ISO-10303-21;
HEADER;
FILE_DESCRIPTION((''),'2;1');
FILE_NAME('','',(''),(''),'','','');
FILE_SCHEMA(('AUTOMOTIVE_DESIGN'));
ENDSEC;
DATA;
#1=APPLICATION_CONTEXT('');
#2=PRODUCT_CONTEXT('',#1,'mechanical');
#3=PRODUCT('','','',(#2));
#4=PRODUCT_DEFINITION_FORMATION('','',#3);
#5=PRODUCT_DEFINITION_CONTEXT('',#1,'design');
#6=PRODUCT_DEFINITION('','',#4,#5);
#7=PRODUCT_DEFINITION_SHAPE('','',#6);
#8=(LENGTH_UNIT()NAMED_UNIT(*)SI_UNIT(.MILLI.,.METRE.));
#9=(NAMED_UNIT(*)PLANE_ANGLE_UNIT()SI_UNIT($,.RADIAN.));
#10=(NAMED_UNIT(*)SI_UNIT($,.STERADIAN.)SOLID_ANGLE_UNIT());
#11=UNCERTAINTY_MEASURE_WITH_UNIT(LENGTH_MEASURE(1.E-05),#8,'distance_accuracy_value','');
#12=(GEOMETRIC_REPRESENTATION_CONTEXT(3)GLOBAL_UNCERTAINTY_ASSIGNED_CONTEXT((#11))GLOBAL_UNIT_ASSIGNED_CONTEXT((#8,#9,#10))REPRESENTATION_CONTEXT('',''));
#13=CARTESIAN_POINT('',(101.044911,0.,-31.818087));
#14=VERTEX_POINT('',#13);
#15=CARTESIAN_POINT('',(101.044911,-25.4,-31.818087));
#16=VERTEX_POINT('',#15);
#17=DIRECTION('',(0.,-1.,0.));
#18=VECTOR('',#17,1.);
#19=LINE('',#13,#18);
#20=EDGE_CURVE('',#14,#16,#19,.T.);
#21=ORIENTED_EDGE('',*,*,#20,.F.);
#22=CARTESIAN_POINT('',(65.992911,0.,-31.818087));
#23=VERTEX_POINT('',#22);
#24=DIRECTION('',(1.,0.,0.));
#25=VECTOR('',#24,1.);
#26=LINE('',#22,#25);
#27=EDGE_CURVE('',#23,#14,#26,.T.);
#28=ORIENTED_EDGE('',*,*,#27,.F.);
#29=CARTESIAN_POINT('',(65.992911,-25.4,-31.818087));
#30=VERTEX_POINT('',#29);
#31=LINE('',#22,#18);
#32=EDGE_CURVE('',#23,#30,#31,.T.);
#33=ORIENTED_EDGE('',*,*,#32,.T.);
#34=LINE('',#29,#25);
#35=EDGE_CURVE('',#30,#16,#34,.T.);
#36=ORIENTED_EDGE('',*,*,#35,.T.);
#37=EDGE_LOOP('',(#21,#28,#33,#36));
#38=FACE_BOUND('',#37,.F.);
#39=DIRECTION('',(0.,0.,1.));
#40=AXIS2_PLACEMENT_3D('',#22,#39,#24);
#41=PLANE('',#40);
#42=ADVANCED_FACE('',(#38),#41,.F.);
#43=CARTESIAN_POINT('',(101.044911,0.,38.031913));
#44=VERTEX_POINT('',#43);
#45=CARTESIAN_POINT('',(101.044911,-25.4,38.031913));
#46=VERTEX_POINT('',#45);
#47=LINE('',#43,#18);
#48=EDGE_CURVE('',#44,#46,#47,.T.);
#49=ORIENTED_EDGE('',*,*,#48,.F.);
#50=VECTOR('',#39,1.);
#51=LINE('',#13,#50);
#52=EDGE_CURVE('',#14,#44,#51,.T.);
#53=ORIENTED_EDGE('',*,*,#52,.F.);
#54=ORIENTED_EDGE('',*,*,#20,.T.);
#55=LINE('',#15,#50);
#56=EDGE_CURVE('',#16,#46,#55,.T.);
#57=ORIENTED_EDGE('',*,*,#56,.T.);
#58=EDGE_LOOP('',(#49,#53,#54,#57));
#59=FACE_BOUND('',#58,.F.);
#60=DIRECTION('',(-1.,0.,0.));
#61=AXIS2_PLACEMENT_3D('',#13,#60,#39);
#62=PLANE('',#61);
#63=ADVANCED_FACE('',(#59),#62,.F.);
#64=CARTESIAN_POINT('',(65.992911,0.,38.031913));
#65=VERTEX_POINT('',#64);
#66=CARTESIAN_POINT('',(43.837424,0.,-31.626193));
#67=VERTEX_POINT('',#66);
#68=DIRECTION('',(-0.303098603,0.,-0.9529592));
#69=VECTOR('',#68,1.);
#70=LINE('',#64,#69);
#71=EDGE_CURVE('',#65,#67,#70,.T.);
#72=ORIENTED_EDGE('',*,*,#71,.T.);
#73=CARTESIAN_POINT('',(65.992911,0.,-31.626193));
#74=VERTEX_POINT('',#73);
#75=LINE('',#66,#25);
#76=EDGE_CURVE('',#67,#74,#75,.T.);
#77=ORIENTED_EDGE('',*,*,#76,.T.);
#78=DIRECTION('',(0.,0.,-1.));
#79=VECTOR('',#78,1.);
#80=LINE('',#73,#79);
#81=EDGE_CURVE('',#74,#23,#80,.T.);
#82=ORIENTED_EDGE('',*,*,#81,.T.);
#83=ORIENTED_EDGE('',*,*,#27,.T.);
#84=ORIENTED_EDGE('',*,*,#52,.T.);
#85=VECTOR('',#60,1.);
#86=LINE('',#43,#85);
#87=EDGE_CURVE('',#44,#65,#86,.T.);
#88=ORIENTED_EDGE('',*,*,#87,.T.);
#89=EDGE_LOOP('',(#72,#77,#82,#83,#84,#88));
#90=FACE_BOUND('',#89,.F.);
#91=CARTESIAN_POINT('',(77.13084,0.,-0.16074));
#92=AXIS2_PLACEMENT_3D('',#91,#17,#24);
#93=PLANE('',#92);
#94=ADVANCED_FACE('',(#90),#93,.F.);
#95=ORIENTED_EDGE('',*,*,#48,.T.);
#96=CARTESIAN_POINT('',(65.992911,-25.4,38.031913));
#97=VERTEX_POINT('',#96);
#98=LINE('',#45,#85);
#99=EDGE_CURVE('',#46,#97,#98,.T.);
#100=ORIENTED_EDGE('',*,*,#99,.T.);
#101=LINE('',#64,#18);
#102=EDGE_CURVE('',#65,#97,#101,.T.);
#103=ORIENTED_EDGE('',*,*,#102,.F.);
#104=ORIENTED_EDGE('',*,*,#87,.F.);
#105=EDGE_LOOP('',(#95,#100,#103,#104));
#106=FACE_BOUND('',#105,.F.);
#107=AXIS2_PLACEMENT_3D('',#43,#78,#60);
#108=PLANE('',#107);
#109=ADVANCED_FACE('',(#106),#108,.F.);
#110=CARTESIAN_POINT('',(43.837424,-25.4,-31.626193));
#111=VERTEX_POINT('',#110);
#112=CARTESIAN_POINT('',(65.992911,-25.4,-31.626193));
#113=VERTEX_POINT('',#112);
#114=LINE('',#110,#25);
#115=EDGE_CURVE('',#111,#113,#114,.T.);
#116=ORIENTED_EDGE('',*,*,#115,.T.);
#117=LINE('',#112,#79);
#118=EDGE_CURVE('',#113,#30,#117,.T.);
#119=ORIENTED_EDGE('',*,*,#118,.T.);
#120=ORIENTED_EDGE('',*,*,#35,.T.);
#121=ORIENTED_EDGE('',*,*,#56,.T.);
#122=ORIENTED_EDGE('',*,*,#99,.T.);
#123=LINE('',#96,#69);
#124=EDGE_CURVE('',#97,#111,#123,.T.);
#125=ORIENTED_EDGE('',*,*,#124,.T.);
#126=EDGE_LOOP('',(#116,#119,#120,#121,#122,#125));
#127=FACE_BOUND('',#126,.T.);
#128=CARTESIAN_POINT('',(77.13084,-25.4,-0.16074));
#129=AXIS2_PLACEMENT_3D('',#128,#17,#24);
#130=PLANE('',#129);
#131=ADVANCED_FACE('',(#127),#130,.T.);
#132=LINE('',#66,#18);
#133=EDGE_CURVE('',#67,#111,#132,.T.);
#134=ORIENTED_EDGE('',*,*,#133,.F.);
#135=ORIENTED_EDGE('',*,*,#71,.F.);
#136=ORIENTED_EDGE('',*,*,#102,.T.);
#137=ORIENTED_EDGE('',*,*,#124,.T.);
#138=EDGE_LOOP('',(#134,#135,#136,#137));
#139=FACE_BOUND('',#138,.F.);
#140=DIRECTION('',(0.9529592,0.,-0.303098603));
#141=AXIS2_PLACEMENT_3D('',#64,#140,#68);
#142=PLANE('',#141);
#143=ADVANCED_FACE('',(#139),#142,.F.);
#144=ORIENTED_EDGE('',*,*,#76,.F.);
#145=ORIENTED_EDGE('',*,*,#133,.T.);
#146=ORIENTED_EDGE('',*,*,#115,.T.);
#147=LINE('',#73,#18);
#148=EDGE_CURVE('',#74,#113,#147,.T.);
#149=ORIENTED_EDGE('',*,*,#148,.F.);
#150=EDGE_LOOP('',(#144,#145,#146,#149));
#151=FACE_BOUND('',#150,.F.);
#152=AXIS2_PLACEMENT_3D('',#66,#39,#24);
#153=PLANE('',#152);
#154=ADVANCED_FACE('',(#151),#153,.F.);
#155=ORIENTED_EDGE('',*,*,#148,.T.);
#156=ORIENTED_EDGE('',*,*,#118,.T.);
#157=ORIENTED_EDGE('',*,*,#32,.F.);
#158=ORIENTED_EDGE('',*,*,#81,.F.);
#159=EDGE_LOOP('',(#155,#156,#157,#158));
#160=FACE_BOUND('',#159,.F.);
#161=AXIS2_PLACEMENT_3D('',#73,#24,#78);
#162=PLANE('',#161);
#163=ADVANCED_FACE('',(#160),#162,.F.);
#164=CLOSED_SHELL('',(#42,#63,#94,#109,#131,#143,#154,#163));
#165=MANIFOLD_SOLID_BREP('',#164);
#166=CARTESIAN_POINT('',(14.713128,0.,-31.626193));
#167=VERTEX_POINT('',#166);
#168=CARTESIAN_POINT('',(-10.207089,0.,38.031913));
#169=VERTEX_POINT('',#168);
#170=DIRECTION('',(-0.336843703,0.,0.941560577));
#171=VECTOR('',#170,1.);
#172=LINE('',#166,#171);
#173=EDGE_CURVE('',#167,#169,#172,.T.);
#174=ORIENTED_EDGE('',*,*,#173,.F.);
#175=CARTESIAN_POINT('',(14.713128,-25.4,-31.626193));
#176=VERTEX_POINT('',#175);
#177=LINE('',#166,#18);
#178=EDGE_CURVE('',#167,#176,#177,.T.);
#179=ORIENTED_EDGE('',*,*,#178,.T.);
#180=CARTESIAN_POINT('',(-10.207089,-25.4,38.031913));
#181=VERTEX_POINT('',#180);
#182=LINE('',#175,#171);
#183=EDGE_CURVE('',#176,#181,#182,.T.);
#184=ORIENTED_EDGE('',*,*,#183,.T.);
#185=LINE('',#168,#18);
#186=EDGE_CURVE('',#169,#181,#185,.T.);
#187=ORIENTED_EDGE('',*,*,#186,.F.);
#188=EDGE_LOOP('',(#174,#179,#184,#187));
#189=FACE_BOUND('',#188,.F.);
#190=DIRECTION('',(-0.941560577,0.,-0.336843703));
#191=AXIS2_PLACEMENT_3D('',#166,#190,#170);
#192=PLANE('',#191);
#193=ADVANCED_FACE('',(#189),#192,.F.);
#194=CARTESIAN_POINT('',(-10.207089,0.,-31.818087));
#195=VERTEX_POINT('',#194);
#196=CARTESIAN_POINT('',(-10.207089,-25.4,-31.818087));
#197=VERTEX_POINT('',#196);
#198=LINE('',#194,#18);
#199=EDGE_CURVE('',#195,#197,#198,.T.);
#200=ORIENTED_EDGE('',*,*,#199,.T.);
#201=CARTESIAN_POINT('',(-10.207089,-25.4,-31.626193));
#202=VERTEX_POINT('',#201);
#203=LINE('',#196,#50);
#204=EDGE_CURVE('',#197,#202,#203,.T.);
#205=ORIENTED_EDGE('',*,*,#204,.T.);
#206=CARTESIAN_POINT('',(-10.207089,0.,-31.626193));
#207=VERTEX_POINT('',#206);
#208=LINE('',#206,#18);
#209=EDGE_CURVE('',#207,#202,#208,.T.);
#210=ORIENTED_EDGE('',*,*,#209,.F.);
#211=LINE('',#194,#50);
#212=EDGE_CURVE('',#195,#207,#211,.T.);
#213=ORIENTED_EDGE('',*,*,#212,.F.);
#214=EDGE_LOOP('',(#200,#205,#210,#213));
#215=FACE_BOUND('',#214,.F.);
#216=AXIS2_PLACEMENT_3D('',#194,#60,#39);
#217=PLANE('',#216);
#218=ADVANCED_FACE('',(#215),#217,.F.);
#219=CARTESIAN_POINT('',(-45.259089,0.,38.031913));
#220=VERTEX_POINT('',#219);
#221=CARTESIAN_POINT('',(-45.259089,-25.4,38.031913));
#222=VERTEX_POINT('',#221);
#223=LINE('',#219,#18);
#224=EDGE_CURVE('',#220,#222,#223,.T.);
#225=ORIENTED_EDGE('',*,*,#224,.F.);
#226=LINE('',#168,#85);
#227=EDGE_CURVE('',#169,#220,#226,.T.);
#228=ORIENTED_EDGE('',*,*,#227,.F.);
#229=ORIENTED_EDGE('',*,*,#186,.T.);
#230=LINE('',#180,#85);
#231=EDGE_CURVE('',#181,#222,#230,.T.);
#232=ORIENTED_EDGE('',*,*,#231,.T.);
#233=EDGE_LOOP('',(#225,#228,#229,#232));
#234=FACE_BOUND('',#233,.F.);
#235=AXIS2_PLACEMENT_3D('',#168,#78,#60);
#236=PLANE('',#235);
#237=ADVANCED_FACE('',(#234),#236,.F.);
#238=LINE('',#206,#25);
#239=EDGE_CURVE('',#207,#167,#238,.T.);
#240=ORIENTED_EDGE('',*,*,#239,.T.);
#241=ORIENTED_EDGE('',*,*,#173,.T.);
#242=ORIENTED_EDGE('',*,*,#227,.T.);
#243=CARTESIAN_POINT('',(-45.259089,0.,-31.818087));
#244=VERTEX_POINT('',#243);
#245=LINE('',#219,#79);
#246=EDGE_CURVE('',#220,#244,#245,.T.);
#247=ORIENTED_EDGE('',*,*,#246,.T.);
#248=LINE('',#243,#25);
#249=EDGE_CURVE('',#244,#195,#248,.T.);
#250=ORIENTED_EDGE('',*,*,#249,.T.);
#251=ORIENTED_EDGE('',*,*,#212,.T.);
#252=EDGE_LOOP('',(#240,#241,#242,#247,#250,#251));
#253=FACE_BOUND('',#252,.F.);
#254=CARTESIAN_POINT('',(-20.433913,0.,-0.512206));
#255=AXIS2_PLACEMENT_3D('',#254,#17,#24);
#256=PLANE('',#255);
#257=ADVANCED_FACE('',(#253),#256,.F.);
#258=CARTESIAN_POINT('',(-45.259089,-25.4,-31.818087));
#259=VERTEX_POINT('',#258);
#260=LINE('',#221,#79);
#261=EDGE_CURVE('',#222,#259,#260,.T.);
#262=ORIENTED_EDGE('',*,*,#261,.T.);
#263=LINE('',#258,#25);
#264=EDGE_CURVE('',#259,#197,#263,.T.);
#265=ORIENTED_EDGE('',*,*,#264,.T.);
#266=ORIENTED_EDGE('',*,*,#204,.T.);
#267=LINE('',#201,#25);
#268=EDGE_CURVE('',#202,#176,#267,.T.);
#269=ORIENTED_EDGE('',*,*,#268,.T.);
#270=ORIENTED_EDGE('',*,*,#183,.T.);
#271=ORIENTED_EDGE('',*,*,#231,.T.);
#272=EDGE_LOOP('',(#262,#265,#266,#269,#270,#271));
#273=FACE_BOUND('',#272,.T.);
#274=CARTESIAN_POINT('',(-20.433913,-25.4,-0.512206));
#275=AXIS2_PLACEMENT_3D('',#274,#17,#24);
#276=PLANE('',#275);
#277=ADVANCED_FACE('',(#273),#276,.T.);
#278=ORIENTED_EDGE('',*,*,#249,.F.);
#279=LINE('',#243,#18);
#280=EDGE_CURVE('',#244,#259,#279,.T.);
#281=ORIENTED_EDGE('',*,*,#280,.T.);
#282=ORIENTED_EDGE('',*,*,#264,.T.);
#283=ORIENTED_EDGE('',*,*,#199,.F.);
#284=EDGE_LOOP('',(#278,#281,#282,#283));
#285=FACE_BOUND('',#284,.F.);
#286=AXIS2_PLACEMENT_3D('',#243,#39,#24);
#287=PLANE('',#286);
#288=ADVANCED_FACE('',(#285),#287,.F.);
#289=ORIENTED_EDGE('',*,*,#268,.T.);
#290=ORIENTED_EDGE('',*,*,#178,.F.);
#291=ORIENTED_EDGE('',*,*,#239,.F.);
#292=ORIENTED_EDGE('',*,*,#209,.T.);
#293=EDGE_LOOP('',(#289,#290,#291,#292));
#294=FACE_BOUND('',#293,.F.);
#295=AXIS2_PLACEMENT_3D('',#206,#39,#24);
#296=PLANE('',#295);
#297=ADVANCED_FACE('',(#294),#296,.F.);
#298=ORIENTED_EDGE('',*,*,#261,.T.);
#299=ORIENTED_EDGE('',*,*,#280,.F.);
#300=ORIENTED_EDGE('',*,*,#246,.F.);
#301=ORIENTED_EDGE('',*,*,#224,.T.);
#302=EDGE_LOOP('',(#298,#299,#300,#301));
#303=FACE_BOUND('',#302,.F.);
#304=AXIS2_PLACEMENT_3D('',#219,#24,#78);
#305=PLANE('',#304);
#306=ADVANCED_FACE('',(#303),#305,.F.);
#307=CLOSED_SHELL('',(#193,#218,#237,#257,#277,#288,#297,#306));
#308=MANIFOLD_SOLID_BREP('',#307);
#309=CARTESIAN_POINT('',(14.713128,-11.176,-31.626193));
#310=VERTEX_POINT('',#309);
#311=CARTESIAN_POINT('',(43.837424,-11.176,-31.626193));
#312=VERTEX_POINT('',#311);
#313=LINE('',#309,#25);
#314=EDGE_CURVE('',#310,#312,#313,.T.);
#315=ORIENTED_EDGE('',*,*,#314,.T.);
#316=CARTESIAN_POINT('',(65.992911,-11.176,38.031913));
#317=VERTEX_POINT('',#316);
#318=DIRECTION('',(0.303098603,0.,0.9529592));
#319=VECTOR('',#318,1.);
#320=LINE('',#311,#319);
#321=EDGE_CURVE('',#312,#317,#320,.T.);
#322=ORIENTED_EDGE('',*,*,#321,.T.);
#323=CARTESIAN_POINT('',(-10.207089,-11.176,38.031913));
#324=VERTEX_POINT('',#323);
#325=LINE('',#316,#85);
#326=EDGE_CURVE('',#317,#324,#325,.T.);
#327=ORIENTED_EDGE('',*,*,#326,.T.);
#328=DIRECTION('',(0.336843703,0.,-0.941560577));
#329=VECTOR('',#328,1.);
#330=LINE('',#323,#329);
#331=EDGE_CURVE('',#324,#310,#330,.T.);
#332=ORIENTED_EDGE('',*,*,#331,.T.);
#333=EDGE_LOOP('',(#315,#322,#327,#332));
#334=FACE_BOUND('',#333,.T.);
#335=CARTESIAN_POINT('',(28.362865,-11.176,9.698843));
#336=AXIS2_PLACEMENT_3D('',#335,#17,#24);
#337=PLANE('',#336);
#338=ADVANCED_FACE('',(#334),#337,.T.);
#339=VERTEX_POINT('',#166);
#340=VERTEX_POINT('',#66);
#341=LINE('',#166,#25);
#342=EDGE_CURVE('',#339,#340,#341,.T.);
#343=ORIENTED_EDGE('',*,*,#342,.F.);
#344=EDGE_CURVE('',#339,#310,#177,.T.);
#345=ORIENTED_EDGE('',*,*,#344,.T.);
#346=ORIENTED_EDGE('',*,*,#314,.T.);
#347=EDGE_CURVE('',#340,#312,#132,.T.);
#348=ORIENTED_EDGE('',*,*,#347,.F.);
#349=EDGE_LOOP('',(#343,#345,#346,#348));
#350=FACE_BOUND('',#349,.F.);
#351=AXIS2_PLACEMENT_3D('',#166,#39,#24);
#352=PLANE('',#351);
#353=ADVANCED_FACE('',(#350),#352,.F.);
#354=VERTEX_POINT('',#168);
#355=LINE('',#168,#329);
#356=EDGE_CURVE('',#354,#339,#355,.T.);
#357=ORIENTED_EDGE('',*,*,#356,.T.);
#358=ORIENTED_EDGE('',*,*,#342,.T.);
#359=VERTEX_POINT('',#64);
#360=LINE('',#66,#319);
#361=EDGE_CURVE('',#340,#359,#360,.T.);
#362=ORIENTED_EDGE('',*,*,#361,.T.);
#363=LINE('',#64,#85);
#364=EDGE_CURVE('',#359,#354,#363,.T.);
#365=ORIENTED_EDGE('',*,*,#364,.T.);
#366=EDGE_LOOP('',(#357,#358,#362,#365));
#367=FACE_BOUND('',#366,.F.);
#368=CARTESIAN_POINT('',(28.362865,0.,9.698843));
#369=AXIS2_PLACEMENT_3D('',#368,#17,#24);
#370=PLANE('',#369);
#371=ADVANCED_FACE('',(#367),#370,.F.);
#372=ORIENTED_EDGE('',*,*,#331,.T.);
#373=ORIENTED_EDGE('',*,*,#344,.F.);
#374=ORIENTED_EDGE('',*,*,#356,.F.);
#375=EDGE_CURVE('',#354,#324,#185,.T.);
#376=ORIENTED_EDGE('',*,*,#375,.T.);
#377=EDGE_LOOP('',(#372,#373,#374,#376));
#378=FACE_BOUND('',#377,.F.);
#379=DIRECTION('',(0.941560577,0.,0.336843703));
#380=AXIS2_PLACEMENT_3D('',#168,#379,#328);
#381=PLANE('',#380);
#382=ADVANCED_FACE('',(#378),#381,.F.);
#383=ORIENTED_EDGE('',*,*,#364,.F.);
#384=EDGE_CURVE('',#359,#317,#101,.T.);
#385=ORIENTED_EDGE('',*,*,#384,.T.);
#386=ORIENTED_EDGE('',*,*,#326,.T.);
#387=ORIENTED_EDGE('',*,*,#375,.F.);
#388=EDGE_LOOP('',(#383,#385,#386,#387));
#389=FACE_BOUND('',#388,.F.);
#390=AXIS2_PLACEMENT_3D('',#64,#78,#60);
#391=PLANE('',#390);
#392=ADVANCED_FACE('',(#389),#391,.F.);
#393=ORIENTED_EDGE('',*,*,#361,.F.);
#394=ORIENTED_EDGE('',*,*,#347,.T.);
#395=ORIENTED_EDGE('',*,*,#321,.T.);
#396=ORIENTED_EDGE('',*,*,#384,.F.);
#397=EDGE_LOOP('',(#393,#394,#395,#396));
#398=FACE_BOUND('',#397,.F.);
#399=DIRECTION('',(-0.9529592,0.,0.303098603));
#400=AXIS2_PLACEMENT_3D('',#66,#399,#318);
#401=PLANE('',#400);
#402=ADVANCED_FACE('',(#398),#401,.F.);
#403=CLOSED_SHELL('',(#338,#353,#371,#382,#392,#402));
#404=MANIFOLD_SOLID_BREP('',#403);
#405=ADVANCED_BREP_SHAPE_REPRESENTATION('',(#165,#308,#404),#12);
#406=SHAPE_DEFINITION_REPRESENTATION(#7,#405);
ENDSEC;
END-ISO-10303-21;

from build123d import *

# Parameters (mm, degrees)
F1_DEPTH = 25.4
F3_DEPTH = 11.176


# Not quite as in the source:
# - a feature of the source that left no trace in its solid (it failed there, or was rolled back) is left out


with BuildPart() as f1:
    # F0 (on Front) → F1 (new body)
    with BuildSketch(Plane.XZ):
        Polygon((-10.2070893071, 38.031912598), (-45.2590893071, 38.031912598), (-45.2590893071, -31.818087402), (-10.2070893071, -31.818087402), (-10.2070893071, -31.6261931479), (14.7131280974, -31.6261931479), align=None)
    extrude(amount=F1_DEPTH)


with BuildPart() as f1b:
    # F0 (on Front) → F1, piece 2 (new body)
    with BuildSketch(Plane.XZ):
        Polygon((101.0449106929, 38.031912598), (65.9929106929, 38.031912598), (43.8374243677, -31.6261931479), (65.9929106929, -31.6261931479), (65.9929106929, -31.818087402), (101.0449106929, -31.818087402), align=None)
    extrude(amount=F1_DEPTH)


with BuildPart() as f3:
    # F0 (on Front) → F3 (new body)
    with BuildSketch(Plane.XZ):
        Polygon((65.9929106929, 38.031912598), (-10.2070893071, 38.031912598), (14.7131280974, -31.6261931479), (43.8374243677, -31.6261931479), align=None)
    extrude(amount=F3_DEPTH)


solid = Compound([f1.part, f1b.part, f3.part])
